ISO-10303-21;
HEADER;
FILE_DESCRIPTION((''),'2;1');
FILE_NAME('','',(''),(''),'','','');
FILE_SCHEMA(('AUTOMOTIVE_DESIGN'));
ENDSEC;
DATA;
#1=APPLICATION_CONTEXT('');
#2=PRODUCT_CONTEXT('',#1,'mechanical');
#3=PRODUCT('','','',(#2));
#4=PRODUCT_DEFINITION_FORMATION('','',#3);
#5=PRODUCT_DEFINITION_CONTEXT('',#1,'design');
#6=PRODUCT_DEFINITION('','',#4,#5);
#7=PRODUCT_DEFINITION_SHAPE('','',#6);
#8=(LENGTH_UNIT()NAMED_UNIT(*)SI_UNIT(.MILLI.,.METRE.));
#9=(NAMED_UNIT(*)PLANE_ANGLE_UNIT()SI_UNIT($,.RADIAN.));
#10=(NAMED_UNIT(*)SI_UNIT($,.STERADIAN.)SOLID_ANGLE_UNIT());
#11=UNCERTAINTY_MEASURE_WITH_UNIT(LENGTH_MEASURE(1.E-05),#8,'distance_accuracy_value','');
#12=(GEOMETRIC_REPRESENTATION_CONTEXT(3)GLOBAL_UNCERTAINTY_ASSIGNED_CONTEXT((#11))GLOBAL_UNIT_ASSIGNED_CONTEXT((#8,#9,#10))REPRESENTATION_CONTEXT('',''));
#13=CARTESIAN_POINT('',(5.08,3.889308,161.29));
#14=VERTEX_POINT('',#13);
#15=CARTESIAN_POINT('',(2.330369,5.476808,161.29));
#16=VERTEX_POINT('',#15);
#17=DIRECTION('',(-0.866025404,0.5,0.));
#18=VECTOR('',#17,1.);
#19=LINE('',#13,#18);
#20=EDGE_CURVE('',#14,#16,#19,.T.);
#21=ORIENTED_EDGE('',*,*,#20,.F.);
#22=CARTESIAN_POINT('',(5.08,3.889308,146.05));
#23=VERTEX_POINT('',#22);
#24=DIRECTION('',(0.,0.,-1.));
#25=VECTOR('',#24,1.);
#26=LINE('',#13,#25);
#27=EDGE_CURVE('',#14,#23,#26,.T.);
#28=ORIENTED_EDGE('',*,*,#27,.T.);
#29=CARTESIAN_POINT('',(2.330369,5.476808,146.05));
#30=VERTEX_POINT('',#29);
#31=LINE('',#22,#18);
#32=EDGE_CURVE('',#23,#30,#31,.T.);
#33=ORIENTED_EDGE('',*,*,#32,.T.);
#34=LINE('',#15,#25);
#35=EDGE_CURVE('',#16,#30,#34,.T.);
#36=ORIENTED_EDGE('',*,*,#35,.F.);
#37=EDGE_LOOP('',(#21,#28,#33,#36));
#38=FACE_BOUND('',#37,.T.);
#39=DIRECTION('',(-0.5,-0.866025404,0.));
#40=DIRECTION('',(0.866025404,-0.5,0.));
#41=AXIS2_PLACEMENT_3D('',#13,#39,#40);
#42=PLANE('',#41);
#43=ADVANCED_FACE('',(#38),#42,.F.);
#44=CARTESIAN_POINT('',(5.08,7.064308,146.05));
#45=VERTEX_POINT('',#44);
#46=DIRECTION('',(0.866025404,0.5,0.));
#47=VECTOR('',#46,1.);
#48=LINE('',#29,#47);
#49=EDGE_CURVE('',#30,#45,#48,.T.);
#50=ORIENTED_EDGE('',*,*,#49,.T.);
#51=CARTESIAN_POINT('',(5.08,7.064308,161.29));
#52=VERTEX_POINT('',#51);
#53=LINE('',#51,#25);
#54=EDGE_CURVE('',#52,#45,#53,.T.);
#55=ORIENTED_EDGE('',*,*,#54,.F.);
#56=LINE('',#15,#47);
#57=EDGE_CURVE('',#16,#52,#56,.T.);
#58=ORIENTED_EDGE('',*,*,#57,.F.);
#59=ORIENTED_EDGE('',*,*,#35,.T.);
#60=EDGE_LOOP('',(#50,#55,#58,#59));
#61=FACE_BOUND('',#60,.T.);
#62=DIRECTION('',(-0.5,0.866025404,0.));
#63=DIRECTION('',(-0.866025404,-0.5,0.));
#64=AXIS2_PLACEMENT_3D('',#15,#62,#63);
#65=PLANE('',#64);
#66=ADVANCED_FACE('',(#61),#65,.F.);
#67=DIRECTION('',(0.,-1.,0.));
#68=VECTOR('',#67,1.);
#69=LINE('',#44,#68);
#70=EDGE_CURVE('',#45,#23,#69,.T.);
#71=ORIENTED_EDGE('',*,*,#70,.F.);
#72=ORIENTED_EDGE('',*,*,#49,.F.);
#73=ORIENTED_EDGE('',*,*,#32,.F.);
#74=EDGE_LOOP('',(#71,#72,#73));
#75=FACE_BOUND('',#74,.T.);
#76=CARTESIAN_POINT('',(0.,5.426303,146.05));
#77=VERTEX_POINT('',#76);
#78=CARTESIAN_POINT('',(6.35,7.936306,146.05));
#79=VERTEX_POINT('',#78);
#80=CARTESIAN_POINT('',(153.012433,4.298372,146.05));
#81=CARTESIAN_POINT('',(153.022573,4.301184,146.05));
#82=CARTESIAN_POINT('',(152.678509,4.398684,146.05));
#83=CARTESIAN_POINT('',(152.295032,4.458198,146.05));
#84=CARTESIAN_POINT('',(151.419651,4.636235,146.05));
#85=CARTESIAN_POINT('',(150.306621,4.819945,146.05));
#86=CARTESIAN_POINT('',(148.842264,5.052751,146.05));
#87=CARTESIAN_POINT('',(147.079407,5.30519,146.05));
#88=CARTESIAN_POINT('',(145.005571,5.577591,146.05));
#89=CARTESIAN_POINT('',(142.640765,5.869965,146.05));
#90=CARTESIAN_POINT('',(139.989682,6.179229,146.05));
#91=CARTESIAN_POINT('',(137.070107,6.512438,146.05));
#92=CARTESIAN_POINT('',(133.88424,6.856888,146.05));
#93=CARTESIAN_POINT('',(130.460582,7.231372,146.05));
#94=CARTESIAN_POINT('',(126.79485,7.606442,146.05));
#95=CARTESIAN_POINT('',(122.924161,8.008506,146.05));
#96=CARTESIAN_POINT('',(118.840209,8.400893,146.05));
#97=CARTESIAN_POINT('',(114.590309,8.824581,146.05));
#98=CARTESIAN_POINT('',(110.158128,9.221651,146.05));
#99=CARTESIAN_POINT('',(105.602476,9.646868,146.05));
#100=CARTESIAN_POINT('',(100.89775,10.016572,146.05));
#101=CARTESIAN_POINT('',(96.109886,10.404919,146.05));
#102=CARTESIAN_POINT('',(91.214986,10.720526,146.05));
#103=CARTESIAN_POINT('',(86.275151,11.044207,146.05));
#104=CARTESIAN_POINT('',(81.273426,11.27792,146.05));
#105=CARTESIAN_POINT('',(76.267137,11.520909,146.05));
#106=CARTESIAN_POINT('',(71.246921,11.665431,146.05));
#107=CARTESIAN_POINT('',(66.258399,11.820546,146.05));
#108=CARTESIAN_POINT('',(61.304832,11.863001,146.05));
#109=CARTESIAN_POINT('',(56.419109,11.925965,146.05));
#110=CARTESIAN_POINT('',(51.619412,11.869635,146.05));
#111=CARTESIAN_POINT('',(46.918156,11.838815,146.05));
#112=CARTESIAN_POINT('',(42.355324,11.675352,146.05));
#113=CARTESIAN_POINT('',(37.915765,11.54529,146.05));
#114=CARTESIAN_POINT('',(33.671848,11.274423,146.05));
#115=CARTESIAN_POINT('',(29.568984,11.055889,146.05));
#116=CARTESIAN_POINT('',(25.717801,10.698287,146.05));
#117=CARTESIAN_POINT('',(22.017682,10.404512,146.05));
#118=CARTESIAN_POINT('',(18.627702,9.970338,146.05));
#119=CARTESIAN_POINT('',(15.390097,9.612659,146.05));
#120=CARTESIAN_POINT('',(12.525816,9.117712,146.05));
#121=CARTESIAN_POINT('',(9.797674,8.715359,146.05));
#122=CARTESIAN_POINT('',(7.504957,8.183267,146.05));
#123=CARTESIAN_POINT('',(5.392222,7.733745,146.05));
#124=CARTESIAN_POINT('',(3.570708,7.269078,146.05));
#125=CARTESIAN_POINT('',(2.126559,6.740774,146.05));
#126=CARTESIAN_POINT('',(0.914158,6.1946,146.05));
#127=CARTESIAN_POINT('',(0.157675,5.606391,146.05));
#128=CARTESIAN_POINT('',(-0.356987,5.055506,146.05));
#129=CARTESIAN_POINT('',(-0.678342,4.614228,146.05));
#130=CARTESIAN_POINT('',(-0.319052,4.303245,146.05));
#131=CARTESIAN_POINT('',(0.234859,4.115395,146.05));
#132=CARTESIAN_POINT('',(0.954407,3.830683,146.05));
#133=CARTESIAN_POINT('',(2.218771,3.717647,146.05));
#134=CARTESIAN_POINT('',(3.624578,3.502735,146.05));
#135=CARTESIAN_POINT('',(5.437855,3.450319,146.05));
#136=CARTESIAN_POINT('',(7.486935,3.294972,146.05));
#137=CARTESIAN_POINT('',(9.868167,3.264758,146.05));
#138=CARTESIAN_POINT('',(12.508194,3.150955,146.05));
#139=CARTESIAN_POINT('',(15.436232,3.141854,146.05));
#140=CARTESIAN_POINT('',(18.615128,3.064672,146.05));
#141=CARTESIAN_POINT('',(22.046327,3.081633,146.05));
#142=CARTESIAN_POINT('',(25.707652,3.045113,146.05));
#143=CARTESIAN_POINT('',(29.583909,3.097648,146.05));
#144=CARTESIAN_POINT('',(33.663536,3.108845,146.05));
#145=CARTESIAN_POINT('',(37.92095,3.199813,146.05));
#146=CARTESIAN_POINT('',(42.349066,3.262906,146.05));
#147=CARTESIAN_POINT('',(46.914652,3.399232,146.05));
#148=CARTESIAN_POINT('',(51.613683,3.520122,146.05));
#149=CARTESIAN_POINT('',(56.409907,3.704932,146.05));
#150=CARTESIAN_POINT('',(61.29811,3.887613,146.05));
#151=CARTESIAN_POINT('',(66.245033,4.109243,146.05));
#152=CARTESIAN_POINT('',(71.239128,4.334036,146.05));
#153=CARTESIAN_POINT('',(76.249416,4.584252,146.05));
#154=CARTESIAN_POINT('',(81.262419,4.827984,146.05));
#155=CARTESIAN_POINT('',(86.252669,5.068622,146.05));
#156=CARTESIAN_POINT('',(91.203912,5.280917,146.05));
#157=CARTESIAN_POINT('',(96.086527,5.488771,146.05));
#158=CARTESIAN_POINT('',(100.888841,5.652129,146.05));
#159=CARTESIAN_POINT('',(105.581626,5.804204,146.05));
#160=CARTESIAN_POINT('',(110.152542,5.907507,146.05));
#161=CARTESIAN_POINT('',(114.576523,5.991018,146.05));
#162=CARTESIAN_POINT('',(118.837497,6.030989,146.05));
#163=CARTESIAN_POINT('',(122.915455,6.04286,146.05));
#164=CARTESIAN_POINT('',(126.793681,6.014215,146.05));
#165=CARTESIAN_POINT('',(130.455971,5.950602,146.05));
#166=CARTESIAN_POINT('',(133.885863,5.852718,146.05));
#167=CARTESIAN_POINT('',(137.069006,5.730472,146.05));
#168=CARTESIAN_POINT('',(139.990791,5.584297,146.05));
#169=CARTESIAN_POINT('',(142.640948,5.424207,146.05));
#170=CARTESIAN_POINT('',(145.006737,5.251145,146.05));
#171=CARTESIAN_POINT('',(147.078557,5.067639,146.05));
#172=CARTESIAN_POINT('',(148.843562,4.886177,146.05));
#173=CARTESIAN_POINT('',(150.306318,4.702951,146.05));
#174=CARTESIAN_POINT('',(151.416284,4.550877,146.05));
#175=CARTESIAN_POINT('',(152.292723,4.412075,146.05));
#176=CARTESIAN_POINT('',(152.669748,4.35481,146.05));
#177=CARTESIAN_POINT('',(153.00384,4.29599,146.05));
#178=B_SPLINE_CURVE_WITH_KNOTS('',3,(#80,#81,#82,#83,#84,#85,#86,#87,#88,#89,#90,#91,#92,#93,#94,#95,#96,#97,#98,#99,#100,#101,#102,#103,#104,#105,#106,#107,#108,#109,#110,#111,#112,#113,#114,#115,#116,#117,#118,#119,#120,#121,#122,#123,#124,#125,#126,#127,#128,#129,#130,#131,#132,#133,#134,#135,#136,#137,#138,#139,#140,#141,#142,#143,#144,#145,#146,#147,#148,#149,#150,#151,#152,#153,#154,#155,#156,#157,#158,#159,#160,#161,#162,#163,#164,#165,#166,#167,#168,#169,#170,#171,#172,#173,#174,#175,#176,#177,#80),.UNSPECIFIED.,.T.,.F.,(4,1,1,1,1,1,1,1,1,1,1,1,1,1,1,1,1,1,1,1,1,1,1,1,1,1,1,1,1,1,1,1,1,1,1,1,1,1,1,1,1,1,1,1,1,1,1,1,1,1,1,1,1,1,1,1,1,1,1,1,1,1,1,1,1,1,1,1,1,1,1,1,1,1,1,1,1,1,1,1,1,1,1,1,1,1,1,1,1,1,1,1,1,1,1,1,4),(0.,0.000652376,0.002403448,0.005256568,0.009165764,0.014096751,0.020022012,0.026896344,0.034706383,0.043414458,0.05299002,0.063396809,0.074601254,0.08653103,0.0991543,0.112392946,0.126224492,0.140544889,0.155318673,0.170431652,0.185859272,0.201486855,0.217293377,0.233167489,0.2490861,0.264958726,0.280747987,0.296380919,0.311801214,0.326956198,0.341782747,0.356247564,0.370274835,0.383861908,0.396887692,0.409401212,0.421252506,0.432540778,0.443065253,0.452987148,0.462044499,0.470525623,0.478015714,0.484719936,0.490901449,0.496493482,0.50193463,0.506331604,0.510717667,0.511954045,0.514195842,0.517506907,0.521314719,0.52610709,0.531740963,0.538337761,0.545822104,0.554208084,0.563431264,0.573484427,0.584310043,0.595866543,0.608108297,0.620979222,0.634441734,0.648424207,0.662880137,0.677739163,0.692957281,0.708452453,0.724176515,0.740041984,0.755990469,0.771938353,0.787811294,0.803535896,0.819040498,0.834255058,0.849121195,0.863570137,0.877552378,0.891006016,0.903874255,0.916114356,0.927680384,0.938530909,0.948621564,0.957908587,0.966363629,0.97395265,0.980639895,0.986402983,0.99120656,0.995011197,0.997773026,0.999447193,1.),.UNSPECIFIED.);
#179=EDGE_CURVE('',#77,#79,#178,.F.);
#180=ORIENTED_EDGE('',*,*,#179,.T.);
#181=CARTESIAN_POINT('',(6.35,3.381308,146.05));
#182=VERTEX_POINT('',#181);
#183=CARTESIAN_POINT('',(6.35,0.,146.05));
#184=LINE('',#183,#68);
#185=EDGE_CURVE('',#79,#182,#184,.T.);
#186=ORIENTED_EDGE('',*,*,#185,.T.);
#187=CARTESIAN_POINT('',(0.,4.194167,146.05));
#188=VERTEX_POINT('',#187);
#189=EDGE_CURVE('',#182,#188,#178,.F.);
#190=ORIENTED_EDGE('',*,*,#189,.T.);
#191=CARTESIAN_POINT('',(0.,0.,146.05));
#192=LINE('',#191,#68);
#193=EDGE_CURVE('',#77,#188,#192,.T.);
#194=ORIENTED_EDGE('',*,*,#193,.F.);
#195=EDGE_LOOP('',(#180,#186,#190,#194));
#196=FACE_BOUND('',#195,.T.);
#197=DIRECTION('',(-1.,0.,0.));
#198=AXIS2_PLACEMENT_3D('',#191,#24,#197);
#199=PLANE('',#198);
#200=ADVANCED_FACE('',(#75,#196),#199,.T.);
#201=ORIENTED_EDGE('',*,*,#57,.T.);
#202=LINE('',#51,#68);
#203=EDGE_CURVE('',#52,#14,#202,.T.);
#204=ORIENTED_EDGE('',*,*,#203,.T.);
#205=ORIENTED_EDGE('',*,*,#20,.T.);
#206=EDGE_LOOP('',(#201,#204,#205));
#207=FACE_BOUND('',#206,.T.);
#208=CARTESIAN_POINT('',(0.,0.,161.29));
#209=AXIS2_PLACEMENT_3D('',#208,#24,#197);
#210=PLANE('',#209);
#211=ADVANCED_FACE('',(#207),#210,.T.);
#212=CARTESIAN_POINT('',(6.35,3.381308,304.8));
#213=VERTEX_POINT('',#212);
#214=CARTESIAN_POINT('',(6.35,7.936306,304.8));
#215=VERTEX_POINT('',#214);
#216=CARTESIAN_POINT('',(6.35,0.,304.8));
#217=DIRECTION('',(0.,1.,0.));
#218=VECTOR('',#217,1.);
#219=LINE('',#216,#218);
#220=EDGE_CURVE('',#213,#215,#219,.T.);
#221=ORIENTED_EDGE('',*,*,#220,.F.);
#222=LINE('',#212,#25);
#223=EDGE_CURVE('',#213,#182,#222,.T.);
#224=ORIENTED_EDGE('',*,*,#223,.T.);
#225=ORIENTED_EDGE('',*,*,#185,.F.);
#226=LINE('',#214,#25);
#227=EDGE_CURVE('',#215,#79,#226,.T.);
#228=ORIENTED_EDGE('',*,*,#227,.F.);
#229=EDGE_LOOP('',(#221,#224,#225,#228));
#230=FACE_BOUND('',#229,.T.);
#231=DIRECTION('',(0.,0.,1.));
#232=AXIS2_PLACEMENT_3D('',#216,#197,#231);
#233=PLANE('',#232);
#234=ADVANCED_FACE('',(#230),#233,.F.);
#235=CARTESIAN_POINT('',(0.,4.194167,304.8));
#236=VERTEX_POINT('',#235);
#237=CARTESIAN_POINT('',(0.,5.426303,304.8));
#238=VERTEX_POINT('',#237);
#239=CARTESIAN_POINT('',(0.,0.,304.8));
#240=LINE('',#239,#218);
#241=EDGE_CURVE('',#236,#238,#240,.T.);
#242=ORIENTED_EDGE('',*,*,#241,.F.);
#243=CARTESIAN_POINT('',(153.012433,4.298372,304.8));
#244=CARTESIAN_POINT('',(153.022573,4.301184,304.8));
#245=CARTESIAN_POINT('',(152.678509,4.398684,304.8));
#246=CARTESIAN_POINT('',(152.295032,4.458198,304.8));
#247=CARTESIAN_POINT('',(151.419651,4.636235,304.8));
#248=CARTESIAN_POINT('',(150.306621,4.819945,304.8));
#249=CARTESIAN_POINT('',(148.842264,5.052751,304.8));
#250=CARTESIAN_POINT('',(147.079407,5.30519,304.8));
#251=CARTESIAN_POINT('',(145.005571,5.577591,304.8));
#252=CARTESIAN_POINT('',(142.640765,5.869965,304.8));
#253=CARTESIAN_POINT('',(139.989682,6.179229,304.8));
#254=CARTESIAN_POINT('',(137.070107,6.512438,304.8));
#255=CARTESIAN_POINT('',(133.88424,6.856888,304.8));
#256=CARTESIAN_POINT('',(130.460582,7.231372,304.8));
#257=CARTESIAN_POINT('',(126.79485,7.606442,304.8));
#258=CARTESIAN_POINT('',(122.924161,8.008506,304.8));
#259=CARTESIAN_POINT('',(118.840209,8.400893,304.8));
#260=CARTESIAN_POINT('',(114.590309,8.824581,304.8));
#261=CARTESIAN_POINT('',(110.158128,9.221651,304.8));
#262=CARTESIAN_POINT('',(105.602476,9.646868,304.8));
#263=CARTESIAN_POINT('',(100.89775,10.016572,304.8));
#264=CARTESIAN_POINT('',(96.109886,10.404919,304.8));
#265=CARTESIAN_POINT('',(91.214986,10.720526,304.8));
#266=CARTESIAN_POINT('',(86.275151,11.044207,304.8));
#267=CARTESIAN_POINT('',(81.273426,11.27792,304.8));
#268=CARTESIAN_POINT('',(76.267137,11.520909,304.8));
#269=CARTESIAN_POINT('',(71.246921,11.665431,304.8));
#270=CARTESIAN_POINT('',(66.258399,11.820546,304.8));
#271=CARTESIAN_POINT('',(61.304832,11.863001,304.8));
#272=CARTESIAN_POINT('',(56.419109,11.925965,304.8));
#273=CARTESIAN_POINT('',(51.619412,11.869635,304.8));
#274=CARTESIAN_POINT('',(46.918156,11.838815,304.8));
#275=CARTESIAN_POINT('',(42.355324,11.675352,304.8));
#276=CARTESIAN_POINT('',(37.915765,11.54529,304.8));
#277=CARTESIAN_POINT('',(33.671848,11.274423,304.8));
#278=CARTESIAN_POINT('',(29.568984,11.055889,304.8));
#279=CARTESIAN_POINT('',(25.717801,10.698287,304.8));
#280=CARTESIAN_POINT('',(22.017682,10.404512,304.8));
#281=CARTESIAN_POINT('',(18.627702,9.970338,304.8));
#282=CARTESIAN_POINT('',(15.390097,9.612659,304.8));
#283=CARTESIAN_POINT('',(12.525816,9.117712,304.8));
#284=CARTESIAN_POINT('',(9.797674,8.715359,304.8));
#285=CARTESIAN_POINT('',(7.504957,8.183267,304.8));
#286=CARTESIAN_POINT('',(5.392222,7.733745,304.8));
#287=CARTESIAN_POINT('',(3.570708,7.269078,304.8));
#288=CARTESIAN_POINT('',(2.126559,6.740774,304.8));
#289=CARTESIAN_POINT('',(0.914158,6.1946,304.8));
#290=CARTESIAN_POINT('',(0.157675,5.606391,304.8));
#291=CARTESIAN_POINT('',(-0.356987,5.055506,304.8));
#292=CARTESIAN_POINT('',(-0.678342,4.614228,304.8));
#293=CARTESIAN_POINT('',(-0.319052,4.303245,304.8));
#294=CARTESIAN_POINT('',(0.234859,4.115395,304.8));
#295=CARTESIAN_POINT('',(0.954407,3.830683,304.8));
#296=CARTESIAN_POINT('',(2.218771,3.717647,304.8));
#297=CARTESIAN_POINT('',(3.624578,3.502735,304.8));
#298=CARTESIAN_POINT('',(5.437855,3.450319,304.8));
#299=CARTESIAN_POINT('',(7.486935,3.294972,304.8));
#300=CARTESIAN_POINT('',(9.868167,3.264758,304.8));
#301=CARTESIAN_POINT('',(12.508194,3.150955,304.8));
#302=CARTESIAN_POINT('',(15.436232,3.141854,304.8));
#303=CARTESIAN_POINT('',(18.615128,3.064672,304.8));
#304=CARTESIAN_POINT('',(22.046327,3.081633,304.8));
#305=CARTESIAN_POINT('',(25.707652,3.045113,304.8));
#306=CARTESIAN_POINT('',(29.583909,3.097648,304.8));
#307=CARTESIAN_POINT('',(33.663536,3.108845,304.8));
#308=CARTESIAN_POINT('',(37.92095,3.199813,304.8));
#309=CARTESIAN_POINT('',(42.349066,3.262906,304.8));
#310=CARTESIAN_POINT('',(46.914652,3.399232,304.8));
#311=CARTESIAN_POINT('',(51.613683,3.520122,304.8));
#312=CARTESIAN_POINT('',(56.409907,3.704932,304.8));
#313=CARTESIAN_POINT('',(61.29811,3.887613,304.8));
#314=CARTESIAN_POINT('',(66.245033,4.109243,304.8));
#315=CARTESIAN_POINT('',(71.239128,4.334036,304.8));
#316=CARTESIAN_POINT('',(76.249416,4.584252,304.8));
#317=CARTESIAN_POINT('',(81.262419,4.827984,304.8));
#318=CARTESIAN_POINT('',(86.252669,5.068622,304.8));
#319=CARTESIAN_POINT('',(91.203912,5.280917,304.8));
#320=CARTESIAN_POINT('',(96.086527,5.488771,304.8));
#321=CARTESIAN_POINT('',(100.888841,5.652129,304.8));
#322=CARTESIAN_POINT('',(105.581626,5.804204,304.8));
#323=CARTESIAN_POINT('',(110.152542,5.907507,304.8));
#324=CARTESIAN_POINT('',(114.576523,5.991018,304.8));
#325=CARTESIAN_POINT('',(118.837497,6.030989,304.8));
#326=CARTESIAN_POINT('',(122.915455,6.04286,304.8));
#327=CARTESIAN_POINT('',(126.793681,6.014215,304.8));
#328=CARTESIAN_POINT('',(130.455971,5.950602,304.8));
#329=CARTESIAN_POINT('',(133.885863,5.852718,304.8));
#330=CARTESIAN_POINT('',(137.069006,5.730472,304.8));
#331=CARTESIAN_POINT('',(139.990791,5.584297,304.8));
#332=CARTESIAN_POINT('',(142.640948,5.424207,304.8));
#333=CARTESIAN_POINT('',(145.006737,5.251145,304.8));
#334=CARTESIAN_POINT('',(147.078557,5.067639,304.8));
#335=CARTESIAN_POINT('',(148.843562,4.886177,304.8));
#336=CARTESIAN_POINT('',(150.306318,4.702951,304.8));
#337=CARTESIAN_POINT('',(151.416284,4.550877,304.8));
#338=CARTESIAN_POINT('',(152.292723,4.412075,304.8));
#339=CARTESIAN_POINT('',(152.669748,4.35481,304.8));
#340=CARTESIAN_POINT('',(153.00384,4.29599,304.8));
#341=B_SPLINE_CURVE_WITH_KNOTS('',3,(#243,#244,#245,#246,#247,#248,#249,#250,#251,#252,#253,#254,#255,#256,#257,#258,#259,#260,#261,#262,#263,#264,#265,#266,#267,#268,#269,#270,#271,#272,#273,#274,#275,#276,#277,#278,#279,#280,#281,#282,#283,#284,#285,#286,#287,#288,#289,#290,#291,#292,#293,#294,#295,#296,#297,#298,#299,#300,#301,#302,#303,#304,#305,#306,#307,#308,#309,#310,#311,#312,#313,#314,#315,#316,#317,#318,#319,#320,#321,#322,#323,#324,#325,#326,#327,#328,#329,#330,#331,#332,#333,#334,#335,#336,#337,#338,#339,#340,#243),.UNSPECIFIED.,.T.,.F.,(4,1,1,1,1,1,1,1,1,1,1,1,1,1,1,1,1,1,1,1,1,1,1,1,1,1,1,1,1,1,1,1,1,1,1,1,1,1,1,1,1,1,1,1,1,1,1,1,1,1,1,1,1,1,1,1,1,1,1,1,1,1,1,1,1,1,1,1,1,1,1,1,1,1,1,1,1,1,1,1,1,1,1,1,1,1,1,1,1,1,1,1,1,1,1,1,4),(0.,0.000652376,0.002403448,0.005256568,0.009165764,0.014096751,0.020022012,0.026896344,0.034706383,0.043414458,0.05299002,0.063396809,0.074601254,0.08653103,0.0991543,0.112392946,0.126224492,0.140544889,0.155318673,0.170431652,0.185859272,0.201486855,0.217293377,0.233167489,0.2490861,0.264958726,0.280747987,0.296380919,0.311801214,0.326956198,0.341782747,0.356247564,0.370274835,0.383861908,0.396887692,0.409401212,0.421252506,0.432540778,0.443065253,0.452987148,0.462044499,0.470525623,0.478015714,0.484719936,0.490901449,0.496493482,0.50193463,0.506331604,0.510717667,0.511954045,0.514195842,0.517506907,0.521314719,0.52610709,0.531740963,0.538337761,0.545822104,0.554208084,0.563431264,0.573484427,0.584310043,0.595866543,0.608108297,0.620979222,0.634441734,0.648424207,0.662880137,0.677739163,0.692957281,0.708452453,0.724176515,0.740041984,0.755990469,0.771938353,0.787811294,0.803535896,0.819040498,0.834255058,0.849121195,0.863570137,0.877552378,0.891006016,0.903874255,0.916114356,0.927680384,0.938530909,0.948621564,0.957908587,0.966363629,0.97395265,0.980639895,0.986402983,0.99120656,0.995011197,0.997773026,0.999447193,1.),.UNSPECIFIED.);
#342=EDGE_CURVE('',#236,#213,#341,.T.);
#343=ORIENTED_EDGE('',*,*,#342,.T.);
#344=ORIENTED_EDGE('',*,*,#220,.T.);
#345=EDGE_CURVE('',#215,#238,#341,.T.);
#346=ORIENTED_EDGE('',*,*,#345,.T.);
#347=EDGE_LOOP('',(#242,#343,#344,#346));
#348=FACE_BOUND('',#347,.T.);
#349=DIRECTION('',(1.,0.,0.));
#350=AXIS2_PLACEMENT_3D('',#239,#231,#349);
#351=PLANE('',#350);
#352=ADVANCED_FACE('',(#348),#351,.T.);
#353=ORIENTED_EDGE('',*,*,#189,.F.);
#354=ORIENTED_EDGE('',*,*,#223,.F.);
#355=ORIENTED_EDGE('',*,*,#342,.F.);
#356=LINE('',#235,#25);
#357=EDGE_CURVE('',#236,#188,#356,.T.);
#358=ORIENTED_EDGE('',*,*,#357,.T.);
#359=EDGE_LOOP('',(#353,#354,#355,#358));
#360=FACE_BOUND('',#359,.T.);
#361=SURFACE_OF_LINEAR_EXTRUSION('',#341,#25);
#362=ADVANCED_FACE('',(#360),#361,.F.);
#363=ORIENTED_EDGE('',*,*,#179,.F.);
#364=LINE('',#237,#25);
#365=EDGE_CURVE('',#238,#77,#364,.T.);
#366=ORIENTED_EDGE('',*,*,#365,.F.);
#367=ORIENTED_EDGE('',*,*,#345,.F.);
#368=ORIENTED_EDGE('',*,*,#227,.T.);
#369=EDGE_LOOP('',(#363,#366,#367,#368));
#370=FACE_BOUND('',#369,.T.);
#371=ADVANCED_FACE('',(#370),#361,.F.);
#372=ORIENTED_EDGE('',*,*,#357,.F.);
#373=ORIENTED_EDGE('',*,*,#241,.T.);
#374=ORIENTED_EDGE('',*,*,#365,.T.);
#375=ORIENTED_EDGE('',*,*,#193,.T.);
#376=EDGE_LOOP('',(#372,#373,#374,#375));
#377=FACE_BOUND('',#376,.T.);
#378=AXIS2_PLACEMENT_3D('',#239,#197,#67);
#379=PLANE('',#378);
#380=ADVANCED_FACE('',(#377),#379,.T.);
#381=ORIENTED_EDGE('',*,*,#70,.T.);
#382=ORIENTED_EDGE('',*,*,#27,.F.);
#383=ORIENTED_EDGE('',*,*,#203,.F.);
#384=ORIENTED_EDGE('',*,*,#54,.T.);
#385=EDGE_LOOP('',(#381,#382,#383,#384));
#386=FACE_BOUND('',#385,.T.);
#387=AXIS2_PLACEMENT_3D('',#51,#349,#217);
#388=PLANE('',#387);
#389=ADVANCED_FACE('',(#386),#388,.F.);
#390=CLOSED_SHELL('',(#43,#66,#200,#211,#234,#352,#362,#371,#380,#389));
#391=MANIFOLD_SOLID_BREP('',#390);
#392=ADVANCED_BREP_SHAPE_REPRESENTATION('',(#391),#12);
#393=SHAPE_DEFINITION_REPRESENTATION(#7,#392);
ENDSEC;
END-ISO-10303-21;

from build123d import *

# Parameters (mm, degrees)
STOCK_LEADING_START            = 146.05
STOCK_LEADING_RIB_BODY_1_DEPTH = 158.75
CUT_EXTRUDE1_DEPTH             = 15.24


# Read off the part's stored shape, not the designer's step: Stock-Leading rib body-1
with BuildPart() as part:
    # Stock-Leading rib body-1 outline → Stock-Leading rib body-1 (new body)
    with BuildSketch(Plane.XY.offset(STOCK_LEADING_START)):
        with BuildLine():
            Line((6.35, 3.381307893), (6.35, 7.936305639))
            add(Edge.make_bspline(
                [(6.35, 7.936305639), (6.009319534, 7.861180878), (5.051957159, 7.646943538), (3.570707886, 7.26907779), (2.126558515, 6.740774481), (0.91415771, 6.194600428), (0.314609795, 5.728416669), (0.046728414, 5.472683173), (9e-09, 5.426302614)],
                knots=[0.474331893, 0.474331893, 0.474331893, 0.474331893, 0.478015714, 0.484719936, 0.490901449, 0.496493482, 0.50193463, 0.503130574, 0.503130574, 0.503130574, 0.503130574], degree=3))
            Line((9e-09, 5.426302614), (-2e-09, 4.19416671))
            add(Edge.make_bspline(
                [(-2e-09, 4.19416671), (0.047371281, 4.176869278), (0.361036244, 4.065468917), (0.954407327, 3.830682548), (2.218770667, 3.717647253), (3.624578145, 3.502734879), (5.081120409, 3.460631155), (6.010518863, 3.402321821), (6.35, 3.381307893)],
                knots=[0.513595493, 0.513595493, 0.513595493, 0.513595493, 0.514195842, 0.517506907, 0.521314719, 0.52610709, 0.531740963, 0.534988738, 0.534988738, 0.534988738, 0.534988738], degree=3))
        make_face()
    extrude(amount=STOCK_LEADING_RIB_BODY_1_DEPTH)

    # Sketch1 → Cut-Extrude1 (cut)
    with BuildSketch(Plane(origin=(0, 0, 146.05), x_dir=(-1, 0, 0), z_dir=(0, 0, -1))):
        Polygon((-5.08, 7.064307893), (-5.08, 3.889307893), (-2.330369343, 5.476807893), align=None)
    extrude(amount=-CUT_EXTRUDE1_DEPTH, mode=Mode.SUBTRACT)


solid = part.part
